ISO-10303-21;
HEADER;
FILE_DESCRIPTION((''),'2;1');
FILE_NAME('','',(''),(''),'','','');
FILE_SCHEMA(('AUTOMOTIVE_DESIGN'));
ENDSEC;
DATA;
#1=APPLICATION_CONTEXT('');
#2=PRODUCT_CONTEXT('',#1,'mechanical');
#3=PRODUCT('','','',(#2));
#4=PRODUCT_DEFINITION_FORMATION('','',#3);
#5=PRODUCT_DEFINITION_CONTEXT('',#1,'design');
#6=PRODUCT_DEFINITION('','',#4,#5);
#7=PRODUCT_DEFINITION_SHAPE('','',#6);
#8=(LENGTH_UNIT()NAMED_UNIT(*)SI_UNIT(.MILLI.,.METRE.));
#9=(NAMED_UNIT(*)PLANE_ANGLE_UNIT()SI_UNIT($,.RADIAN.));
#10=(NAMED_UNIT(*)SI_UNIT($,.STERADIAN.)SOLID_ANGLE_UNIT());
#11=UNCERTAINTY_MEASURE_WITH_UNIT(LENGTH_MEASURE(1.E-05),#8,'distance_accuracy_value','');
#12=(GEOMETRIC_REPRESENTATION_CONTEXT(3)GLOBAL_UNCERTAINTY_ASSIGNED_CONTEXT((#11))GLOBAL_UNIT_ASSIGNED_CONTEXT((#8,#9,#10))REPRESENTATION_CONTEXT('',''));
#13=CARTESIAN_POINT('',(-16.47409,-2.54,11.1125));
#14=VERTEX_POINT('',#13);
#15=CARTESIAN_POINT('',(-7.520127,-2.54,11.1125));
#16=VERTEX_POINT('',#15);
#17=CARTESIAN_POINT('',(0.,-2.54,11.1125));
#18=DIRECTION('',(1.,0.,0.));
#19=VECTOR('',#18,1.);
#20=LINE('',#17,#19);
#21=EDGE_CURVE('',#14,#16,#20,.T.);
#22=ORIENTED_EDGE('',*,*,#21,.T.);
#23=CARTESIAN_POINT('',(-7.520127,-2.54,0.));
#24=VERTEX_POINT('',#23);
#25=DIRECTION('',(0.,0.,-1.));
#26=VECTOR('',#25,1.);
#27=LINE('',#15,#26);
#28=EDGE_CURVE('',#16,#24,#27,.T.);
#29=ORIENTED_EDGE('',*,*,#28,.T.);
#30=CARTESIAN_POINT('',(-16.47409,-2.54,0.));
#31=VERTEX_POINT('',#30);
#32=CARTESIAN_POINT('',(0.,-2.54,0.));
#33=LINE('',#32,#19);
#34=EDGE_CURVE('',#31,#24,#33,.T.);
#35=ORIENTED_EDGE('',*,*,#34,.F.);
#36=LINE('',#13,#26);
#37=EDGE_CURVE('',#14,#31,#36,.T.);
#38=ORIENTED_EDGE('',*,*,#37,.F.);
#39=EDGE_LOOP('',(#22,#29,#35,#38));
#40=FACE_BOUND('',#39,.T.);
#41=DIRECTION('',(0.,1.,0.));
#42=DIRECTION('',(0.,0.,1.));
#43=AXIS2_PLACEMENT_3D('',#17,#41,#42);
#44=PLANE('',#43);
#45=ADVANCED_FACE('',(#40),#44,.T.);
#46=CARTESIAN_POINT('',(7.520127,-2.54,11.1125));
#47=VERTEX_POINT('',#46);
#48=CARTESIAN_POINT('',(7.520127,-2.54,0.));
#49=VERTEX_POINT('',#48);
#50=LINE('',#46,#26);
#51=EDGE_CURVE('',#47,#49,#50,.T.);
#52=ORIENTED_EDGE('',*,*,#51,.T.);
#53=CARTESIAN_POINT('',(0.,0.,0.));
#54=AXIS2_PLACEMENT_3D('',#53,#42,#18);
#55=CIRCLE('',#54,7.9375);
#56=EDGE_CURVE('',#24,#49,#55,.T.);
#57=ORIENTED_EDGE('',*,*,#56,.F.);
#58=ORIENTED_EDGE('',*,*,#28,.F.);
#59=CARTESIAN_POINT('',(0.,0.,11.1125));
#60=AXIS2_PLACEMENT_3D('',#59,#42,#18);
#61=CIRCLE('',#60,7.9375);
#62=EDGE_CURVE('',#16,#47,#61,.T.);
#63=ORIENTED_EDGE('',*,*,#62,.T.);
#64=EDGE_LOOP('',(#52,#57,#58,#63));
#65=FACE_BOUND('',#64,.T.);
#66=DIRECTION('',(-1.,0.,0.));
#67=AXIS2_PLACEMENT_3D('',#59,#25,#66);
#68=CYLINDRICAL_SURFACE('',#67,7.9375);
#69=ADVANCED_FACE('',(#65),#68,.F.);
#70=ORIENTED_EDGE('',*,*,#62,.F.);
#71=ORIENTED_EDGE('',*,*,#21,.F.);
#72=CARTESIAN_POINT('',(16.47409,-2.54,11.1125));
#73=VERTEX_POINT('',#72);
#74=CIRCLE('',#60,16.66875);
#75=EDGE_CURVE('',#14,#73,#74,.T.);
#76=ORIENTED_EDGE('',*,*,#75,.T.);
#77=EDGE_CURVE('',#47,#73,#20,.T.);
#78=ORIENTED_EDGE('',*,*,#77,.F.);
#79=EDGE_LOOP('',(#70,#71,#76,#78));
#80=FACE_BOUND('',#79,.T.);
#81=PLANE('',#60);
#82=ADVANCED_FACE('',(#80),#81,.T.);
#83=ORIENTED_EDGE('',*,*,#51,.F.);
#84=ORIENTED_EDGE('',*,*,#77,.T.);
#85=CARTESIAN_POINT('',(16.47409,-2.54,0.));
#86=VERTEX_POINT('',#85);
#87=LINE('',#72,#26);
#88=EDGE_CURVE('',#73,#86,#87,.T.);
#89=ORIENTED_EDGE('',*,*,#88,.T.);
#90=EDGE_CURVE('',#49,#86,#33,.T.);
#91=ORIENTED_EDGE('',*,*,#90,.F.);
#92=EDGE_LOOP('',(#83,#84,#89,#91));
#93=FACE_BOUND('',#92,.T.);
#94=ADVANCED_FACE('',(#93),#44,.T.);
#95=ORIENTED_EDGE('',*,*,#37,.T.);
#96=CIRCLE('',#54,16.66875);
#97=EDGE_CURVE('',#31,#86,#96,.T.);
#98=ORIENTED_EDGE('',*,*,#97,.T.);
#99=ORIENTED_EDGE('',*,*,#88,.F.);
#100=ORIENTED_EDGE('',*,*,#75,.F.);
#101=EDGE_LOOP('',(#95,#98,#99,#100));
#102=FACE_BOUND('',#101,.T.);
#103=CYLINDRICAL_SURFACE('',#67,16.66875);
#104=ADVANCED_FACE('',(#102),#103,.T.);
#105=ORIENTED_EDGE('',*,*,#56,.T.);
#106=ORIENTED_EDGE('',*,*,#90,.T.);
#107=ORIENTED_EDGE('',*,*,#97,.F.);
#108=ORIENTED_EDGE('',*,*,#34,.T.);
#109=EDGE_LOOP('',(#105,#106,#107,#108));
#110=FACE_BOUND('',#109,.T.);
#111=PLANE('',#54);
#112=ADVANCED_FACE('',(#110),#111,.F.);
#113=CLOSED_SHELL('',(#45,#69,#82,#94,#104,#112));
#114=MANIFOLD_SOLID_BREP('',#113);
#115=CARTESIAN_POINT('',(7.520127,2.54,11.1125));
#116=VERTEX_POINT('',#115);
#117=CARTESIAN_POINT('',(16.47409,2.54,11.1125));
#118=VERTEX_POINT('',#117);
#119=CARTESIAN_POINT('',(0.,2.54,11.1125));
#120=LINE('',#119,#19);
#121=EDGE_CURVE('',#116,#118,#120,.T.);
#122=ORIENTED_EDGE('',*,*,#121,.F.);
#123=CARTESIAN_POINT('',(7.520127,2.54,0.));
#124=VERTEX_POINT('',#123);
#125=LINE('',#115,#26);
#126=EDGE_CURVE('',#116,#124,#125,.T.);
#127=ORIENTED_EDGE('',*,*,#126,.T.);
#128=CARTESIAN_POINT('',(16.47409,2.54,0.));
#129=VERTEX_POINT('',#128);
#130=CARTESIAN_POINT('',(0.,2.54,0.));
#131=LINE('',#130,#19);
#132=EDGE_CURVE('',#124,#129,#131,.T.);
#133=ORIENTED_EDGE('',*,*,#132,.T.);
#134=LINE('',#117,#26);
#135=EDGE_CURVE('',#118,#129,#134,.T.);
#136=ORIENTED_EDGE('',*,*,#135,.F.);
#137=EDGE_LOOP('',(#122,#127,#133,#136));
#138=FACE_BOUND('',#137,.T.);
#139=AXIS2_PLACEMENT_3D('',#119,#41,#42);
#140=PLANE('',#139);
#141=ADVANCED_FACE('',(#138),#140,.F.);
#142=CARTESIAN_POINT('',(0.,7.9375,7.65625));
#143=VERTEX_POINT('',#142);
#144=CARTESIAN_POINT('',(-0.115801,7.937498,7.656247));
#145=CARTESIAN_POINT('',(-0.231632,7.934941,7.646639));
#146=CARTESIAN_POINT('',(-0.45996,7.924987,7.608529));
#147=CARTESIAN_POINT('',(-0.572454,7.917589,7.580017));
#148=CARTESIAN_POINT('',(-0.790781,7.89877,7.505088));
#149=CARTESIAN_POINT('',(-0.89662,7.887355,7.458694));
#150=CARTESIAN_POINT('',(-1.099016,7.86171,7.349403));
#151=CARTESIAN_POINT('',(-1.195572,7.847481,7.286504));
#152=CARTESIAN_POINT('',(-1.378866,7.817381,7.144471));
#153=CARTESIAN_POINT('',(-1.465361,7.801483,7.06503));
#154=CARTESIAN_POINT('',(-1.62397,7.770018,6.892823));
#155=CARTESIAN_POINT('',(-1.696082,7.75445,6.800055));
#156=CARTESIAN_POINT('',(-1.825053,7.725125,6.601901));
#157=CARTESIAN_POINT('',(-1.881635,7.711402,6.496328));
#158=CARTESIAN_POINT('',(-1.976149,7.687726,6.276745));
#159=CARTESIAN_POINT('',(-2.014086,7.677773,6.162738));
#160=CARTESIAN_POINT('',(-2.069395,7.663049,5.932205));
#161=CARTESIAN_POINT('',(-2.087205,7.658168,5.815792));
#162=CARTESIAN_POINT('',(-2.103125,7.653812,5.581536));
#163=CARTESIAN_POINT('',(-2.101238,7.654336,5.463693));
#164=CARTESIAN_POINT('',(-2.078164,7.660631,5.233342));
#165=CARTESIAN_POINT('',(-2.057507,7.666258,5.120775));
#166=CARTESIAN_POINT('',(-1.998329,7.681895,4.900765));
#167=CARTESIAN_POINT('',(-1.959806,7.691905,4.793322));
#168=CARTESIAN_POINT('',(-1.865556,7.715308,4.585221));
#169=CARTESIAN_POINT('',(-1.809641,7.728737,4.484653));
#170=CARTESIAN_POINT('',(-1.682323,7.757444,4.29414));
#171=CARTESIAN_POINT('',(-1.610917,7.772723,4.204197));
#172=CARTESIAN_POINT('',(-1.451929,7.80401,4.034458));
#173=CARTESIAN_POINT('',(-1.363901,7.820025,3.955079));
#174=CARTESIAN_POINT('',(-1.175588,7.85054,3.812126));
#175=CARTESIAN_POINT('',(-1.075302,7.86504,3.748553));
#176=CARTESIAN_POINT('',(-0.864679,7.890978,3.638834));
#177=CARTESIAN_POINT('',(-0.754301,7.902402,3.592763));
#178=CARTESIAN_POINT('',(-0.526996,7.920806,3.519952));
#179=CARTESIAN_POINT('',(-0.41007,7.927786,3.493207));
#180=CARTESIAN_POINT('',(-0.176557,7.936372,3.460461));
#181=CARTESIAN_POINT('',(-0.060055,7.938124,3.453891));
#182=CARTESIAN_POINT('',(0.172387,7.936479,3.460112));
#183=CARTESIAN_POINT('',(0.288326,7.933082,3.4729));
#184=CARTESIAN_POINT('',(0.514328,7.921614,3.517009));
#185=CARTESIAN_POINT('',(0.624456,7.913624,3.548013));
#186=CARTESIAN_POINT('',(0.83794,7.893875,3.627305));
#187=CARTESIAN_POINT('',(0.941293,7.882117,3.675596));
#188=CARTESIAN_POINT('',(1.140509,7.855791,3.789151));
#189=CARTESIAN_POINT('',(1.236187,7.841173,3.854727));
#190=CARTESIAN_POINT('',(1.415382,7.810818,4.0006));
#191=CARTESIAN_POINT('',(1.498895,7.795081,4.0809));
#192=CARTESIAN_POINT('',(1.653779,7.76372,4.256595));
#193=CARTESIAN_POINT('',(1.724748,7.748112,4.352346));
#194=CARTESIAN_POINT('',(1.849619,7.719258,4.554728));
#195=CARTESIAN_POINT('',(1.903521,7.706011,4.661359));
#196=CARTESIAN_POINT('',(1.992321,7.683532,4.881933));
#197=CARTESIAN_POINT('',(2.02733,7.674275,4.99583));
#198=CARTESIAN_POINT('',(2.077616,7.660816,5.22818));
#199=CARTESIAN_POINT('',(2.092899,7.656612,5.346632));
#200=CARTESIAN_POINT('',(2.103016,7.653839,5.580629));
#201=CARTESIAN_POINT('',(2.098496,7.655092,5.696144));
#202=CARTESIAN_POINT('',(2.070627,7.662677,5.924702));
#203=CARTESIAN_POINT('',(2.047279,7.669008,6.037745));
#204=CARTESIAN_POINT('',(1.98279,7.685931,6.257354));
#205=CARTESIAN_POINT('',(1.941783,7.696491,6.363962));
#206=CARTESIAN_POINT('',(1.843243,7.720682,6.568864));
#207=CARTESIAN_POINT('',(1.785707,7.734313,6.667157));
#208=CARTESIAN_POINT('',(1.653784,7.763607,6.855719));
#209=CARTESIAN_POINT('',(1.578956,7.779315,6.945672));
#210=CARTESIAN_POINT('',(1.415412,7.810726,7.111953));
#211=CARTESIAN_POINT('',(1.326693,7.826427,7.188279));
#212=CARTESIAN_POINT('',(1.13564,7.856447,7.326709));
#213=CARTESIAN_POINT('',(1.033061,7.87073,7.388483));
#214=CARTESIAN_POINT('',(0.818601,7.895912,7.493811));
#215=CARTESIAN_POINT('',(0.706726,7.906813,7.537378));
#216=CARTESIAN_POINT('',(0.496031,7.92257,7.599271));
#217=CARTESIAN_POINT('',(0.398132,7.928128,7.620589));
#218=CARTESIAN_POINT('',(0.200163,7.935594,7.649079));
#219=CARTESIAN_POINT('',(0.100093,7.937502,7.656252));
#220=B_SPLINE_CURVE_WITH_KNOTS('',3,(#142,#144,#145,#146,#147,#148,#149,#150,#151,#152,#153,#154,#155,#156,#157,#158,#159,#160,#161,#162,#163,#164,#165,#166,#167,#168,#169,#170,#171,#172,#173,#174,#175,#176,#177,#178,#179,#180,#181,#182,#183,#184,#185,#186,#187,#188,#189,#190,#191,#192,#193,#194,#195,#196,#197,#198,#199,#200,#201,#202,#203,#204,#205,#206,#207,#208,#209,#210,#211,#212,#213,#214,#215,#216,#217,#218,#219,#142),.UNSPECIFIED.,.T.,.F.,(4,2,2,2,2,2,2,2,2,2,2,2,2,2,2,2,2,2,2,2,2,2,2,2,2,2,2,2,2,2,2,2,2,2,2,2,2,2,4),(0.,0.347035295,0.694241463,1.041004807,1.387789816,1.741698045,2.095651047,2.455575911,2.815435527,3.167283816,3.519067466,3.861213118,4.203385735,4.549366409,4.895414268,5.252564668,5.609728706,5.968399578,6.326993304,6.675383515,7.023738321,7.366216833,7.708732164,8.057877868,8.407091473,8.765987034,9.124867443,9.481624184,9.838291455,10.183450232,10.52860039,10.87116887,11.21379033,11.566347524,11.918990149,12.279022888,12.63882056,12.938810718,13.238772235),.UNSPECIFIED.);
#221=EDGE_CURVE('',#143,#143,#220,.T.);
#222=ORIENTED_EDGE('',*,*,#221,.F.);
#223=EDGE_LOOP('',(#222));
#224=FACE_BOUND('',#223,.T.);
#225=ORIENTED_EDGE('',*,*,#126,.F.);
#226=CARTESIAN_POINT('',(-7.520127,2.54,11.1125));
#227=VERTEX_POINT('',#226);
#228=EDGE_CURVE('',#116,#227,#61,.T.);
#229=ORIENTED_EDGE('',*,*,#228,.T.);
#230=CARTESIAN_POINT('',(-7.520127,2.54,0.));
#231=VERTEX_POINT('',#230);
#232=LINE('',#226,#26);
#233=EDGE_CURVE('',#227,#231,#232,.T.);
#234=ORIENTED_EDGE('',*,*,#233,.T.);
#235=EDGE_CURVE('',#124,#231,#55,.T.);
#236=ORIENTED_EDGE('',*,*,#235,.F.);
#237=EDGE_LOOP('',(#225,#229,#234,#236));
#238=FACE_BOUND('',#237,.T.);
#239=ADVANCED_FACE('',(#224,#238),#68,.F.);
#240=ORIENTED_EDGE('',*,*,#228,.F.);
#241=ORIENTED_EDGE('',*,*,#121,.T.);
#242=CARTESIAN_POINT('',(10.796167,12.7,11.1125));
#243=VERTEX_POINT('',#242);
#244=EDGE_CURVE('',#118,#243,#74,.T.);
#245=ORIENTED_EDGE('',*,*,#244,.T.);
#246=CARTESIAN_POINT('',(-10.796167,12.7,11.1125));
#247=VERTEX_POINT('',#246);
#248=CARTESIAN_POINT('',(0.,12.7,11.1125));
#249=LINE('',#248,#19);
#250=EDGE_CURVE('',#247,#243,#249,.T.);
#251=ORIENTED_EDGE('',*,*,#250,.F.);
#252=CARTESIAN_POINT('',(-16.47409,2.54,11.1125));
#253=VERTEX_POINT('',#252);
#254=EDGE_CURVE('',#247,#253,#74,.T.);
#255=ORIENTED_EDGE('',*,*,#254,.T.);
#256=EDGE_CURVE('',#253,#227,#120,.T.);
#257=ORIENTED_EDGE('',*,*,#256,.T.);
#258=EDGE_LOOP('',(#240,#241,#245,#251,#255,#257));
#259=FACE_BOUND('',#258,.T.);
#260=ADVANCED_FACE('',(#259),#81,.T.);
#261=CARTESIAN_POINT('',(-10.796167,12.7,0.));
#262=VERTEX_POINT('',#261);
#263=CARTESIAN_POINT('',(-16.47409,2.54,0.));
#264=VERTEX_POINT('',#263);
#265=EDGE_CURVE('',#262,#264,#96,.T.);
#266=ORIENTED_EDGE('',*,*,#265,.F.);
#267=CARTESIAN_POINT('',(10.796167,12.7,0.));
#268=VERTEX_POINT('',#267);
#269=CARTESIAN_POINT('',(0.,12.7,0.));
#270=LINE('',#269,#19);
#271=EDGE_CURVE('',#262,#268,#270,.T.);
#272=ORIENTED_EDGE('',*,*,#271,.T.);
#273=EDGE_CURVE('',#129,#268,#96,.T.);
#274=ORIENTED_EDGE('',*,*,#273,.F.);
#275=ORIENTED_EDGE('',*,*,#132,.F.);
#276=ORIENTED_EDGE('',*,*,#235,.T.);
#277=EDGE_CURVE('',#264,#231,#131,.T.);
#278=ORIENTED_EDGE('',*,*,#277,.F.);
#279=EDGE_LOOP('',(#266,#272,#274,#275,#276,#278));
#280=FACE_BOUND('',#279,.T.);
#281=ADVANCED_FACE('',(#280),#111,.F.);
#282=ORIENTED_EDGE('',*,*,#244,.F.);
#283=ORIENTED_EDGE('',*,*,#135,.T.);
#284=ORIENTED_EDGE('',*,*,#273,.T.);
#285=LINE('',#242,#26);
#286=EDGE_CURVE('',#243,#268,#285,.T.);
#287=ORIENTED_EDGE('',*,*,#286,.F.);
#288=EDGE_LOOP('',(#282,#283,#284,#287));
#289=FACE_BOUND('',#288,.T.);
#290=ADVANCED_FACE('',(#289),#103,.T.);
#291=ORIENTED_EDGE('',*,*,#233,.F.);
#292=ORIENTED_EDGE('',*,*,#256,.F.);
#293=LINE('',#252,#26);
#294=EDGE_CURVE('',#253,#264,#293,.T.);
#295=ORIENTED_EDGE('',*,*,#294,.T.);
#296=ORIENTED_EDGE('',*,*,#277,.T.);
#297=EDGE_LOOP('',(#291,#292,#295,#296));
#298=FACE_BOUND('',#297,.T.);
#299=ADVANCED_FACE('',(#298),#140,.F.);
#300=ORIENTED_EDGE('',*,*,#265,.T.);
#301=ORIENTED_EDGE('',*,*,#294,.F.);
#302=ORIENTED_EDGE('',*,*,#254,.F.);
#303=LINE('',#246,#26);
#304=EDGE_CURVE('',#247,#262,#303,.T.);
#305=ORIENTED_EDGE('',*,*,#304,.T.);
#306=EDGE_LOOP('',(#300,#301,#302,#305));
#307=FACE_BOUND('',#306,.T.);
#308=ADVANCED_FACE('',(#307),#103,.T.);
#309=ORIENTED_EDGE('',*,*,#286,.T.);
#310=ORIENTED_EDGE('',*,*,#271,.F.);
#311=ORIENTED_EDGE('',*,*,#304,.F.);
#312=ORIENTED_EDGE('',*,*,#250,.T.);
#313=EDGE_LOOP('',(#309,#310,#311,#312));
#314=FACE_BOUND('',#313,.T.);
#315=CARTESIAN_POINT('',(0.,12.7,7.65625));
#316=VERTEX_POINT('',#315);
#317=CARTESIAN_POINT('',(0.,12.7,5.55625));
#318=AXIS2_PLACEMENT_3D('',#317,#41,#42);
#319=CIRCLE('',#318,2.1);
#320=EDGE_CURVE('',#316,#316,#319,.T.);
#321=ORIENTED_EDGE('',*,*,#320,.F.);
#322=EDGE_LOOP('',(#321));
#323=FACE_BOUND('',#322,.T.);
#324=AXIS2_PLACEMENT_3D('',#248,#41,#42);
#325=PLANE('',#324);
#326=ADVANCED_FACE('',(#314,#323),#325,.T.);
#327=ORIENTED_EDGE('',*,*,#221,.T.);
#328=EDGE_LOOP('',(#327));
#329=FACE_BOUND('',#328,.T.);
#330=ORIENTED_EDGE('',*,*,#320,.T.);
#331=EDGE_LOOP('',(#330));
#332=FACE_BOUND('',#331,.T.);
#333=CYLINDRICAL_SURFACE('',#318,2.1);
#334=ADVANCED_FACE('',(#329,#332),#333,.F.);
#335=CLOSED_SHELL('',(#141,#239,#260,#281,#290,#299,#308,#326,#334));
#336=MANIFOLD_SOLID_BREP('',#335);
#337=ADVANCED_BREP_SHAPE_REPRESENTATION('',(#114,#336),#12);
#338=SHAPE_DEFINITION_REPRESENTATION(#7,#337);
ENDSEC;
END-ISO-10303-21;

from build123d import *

# Parameters (mm, degrees)
BOSS_EXTRUDE1_DEPTH           = 11.1125
BOSS_EXTRUDE1_2_DEPTH         = 11.1125
M5X0_8_TAPPED_HOLE1_OUTLINE_W = 2.1
M5X0_8_TAPPED_HOLE1_OUTLINE_H = 5.045375368


# Read off the part's stored shape, not the designer's step: M5x0.8 Tapped Hole1
with BuildPart() as part:
    # Sketch1 → Boss-Extrude1 (new body)
    with BuildSketch(Plane.XY):
        with BuildLine():
            ThreePointArc((-7.520126744, 2.54), (0, 7.9375), (7.520126744, 2.54))
            Line((7.520126744, 2.54), (16.474089552, 2.54))
            ThreePointArc((16.474089552, 2.54), (14.550708782, 8.131672676), (10.796167216, 12.7))
            Line((10.796167216, 12.7), (-10.796167216, 12.7))
            ThreePointArc((-10.796167216, 12.7), (-14.550708782, 8.131672676), (-16.474089552, 2.54))
            Line((-16.474089552, 2.54), (-7.520126744, 2.54))
        make_face()
    extrude(amount=BOSS_EXTRUDE1_DEPTH)

    # M5x0.8 Tapped Hole1 outline → M5x0.8 Tapped Hole1 (revolve, cut)
    with BuildSketch(Plane.XY.offset(5.55625)):
        with Locations((1.05, 10.177312316)):
            Rectangle(M5X0_8_TAPPED_HOLE1_OUTLINE_W, M5X0_8_TAPPED_HOLE1_OUTLINE_H)
    revolve(axis=Axis((0, 0, 5.55625), (0, 1, 0)), mode=Mode.SUBTRACT)


with BuildPart() as body_2:
    # Sketch1 → Boss-Extrude1 2 (new body)
    with BuildSketch(Plane.XY):
        with BuildLine():
            Line((16.474089552, -2.54), (7.520126744, -2.54))
            ThreePointArc((7.520126744, -2.54), (0, -7.9375), (-7.520126744, -2.54))
            Line((-7.520126744, -2.54), (-16.474089552, -2.54))
            ThreePointArc((-16.474089552, -2.54), (0, -16.66875), (16.474089552, -2.54))
        make_face()
    extrude(amount=BOSS_EXTRUDE1_2_DEPTH)


solid = Compound([part.part, body_2.part])
